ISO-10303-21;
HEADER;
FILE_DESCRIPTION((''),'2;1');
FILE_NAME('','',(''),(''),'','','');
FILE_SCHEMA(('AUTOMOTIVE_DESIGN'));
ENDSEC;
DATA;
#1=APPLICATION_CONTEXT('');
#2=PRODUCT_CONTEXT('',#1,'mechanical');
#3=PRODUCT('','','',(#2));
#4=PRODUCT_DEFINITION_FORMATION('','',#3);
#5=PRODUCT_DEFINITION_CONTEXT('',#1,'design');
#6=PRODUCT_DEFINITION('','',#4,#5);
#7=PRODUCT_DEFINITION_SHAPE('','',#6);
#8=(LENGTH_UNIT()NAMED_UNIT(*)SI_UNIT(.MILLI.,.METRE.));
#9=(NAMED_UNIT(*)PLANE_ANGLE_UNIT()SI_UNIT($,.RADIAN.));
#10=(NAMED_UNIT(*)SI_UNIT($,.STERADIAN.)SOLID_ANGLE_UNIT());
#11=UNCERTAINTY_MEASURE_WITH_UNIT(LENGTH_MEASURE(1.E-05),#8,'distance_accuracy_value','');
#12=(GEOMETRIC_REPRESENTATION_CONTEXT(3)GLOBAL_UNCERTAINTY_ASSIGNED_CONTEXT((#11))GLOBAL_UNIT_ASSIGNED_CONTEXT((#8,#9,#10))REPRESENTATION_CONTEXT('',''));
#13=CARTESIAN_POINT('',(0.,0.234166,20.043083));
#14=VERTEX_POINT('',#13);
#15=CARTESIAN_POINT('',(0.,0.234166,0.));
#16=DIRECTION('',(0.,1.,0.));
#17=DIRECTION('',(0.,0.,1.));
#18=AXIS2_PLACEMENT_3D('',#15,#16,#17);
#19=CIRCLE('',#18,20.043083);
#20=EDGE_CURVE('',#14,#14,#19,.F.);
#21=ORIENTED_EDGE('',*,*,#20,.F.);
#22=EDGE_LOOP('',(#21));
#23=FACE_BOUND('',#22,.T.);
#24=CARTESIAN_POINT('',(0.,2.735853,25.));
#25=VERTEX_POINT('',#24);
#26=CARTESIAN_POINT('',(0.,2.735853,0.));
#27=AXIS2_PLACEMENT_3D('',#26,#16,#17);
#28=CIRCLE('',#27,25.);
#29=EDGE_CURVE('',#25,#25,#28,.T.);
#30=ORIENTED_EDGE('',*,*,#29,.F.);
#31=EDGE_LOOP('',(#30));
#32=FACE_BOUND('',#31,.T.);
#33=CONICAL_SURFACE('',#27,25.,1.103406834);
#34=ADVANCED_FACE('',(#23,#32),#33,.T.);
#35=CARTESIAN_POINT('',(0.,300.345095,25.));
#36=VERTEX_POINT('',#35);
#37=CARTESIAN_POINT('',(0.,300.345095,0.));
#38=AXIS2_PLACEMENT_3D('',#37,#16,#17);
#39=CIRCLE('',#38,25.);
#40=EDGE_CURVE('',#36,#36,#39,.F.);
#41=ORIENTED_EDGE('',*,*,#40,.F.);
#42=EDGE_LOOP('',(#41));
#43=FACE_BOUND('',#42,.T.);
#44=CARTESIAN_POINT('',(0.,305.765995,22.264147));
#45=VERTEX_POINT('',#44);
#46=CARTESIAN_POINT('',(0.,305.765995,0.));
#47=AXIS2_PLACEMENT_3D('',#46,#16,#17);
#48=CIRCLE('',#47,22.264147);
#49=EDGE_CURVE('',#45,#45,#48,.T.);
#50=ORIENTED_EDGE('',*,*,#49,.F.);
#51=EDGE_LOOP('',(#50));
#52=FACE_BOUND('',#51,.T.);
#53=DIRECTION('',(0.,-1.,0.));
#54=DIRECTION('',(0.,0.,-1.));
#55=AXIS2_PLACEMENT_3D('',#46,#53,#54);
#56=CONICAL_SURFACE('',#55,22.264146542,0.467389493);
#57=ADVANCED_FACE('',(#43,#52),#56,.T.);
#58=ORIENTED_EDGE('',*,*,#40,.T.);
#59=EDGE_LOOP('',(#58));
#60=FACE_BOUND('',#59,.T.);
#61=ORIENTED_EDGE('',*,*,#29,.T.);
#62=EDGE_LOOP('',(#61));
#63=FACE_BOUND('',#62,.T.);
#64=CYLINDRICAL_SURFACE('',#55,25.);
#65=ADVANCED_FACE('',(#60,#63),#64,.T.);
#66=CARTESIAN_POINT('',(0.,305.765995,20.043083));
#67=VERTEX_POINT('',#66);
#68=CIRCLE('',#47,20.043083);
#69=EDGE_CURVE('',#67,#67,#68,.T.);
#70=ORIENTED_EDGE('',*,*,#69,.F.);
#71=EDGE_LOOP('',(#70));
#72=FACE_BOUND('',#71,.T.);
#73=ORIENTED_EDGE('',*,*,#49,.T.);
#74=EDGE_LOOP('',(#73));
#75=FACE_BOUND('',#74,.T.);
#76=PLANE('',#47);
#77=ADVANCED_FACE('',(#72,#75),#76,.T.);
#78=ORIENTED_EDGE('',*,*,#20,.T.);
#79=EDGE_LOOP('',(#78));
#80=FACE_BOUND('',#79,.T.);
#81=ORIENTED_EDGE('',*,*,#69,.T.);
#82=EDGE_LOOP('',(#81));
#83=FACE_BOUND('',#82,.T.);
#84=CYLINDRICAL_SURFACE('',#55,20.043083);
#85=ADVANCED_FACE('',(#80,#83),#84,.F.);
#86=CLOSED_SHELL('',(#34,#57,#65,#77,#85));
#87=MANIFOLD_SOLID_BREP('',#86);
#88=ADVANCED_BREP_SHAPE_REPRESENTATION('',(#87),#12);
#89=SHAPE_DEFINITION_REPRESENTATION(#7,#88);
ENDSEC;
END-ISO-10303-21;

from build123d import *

# Parameters (mm, degrees)
SKETCH1_R           = 25
BOSS_EXTRUDE1_DEPTH = 305.765995
SKETCH2_R           = 20.043083367
CUT_EXTRUDE1_DEPTH  = 308.803254853
CHAMFER1_SIZE       = 5.420901
CHAMFER1_SIZE_2     = 2.735853


with BuildPart() as part:
    # Sketch1 → Boss-Extrude1 (new body)
    with BuildSketch(Plane(origin=(0, 0, 0), x_dir=(1, 0, 0), z_dir=(0, 1, 0))):
        with Locations(Location((0, 0, 0), (0, 0, 270))):
            Circle(SKETCH1_R)
    extrude(amount=BOSS_EXTRUDE1_DEPTH)

    # Sketch2 → Cut-Extrude1 (cut, through all)
    with BuildSketch(Plane(origin=(0, 0, 0), x_dir=(1, 0, 0), z_dir=(0, 1, 0))):
        with Locations(Location((0, 0, 0), (0, 0, 270))):
            Circle(SKETCH2_R)
    extrude(amount=CUT_EXTRUDE1_DEPTH, mode=Mode.SUBTRACT)

    # Chamfer1
    # the kernel refuses this chamfer: 5.420901, 2.735853 mm, written as the material it takes off along each edge
    with BuildSketch(Plane(origin=(0, 305.765995, 0), x_dir=(0, 0, 1), z_dir=(-1, 0, 0))) as chamfer1_piece_1:
        Polygon((25, -CHAMFER1_SIZE), (25 - CHAMFER1_SIZE_2, 0), (25, 0), align=None)
    revolve(axis=Axis((0, 305.765995, 0), (0, 1, 0)), mode=Mode.SUBTRACT)
    with BuildSketch(Plane(origin=(0, 0, 0), x_dir=(0, 0, 1), z_dir=(-1, 0, 0))) as chamfer1_piece_2:
        Polygon((25, CHAMFER1_SIZE_2), (25 - CHAMFER1_SIZE, 0), (25, 0), align=None)
    revolve(axis=Axis((0, 0, 0), (0, 1, 0)), mode=Mode.SUBTRACT)


solid = part.part
